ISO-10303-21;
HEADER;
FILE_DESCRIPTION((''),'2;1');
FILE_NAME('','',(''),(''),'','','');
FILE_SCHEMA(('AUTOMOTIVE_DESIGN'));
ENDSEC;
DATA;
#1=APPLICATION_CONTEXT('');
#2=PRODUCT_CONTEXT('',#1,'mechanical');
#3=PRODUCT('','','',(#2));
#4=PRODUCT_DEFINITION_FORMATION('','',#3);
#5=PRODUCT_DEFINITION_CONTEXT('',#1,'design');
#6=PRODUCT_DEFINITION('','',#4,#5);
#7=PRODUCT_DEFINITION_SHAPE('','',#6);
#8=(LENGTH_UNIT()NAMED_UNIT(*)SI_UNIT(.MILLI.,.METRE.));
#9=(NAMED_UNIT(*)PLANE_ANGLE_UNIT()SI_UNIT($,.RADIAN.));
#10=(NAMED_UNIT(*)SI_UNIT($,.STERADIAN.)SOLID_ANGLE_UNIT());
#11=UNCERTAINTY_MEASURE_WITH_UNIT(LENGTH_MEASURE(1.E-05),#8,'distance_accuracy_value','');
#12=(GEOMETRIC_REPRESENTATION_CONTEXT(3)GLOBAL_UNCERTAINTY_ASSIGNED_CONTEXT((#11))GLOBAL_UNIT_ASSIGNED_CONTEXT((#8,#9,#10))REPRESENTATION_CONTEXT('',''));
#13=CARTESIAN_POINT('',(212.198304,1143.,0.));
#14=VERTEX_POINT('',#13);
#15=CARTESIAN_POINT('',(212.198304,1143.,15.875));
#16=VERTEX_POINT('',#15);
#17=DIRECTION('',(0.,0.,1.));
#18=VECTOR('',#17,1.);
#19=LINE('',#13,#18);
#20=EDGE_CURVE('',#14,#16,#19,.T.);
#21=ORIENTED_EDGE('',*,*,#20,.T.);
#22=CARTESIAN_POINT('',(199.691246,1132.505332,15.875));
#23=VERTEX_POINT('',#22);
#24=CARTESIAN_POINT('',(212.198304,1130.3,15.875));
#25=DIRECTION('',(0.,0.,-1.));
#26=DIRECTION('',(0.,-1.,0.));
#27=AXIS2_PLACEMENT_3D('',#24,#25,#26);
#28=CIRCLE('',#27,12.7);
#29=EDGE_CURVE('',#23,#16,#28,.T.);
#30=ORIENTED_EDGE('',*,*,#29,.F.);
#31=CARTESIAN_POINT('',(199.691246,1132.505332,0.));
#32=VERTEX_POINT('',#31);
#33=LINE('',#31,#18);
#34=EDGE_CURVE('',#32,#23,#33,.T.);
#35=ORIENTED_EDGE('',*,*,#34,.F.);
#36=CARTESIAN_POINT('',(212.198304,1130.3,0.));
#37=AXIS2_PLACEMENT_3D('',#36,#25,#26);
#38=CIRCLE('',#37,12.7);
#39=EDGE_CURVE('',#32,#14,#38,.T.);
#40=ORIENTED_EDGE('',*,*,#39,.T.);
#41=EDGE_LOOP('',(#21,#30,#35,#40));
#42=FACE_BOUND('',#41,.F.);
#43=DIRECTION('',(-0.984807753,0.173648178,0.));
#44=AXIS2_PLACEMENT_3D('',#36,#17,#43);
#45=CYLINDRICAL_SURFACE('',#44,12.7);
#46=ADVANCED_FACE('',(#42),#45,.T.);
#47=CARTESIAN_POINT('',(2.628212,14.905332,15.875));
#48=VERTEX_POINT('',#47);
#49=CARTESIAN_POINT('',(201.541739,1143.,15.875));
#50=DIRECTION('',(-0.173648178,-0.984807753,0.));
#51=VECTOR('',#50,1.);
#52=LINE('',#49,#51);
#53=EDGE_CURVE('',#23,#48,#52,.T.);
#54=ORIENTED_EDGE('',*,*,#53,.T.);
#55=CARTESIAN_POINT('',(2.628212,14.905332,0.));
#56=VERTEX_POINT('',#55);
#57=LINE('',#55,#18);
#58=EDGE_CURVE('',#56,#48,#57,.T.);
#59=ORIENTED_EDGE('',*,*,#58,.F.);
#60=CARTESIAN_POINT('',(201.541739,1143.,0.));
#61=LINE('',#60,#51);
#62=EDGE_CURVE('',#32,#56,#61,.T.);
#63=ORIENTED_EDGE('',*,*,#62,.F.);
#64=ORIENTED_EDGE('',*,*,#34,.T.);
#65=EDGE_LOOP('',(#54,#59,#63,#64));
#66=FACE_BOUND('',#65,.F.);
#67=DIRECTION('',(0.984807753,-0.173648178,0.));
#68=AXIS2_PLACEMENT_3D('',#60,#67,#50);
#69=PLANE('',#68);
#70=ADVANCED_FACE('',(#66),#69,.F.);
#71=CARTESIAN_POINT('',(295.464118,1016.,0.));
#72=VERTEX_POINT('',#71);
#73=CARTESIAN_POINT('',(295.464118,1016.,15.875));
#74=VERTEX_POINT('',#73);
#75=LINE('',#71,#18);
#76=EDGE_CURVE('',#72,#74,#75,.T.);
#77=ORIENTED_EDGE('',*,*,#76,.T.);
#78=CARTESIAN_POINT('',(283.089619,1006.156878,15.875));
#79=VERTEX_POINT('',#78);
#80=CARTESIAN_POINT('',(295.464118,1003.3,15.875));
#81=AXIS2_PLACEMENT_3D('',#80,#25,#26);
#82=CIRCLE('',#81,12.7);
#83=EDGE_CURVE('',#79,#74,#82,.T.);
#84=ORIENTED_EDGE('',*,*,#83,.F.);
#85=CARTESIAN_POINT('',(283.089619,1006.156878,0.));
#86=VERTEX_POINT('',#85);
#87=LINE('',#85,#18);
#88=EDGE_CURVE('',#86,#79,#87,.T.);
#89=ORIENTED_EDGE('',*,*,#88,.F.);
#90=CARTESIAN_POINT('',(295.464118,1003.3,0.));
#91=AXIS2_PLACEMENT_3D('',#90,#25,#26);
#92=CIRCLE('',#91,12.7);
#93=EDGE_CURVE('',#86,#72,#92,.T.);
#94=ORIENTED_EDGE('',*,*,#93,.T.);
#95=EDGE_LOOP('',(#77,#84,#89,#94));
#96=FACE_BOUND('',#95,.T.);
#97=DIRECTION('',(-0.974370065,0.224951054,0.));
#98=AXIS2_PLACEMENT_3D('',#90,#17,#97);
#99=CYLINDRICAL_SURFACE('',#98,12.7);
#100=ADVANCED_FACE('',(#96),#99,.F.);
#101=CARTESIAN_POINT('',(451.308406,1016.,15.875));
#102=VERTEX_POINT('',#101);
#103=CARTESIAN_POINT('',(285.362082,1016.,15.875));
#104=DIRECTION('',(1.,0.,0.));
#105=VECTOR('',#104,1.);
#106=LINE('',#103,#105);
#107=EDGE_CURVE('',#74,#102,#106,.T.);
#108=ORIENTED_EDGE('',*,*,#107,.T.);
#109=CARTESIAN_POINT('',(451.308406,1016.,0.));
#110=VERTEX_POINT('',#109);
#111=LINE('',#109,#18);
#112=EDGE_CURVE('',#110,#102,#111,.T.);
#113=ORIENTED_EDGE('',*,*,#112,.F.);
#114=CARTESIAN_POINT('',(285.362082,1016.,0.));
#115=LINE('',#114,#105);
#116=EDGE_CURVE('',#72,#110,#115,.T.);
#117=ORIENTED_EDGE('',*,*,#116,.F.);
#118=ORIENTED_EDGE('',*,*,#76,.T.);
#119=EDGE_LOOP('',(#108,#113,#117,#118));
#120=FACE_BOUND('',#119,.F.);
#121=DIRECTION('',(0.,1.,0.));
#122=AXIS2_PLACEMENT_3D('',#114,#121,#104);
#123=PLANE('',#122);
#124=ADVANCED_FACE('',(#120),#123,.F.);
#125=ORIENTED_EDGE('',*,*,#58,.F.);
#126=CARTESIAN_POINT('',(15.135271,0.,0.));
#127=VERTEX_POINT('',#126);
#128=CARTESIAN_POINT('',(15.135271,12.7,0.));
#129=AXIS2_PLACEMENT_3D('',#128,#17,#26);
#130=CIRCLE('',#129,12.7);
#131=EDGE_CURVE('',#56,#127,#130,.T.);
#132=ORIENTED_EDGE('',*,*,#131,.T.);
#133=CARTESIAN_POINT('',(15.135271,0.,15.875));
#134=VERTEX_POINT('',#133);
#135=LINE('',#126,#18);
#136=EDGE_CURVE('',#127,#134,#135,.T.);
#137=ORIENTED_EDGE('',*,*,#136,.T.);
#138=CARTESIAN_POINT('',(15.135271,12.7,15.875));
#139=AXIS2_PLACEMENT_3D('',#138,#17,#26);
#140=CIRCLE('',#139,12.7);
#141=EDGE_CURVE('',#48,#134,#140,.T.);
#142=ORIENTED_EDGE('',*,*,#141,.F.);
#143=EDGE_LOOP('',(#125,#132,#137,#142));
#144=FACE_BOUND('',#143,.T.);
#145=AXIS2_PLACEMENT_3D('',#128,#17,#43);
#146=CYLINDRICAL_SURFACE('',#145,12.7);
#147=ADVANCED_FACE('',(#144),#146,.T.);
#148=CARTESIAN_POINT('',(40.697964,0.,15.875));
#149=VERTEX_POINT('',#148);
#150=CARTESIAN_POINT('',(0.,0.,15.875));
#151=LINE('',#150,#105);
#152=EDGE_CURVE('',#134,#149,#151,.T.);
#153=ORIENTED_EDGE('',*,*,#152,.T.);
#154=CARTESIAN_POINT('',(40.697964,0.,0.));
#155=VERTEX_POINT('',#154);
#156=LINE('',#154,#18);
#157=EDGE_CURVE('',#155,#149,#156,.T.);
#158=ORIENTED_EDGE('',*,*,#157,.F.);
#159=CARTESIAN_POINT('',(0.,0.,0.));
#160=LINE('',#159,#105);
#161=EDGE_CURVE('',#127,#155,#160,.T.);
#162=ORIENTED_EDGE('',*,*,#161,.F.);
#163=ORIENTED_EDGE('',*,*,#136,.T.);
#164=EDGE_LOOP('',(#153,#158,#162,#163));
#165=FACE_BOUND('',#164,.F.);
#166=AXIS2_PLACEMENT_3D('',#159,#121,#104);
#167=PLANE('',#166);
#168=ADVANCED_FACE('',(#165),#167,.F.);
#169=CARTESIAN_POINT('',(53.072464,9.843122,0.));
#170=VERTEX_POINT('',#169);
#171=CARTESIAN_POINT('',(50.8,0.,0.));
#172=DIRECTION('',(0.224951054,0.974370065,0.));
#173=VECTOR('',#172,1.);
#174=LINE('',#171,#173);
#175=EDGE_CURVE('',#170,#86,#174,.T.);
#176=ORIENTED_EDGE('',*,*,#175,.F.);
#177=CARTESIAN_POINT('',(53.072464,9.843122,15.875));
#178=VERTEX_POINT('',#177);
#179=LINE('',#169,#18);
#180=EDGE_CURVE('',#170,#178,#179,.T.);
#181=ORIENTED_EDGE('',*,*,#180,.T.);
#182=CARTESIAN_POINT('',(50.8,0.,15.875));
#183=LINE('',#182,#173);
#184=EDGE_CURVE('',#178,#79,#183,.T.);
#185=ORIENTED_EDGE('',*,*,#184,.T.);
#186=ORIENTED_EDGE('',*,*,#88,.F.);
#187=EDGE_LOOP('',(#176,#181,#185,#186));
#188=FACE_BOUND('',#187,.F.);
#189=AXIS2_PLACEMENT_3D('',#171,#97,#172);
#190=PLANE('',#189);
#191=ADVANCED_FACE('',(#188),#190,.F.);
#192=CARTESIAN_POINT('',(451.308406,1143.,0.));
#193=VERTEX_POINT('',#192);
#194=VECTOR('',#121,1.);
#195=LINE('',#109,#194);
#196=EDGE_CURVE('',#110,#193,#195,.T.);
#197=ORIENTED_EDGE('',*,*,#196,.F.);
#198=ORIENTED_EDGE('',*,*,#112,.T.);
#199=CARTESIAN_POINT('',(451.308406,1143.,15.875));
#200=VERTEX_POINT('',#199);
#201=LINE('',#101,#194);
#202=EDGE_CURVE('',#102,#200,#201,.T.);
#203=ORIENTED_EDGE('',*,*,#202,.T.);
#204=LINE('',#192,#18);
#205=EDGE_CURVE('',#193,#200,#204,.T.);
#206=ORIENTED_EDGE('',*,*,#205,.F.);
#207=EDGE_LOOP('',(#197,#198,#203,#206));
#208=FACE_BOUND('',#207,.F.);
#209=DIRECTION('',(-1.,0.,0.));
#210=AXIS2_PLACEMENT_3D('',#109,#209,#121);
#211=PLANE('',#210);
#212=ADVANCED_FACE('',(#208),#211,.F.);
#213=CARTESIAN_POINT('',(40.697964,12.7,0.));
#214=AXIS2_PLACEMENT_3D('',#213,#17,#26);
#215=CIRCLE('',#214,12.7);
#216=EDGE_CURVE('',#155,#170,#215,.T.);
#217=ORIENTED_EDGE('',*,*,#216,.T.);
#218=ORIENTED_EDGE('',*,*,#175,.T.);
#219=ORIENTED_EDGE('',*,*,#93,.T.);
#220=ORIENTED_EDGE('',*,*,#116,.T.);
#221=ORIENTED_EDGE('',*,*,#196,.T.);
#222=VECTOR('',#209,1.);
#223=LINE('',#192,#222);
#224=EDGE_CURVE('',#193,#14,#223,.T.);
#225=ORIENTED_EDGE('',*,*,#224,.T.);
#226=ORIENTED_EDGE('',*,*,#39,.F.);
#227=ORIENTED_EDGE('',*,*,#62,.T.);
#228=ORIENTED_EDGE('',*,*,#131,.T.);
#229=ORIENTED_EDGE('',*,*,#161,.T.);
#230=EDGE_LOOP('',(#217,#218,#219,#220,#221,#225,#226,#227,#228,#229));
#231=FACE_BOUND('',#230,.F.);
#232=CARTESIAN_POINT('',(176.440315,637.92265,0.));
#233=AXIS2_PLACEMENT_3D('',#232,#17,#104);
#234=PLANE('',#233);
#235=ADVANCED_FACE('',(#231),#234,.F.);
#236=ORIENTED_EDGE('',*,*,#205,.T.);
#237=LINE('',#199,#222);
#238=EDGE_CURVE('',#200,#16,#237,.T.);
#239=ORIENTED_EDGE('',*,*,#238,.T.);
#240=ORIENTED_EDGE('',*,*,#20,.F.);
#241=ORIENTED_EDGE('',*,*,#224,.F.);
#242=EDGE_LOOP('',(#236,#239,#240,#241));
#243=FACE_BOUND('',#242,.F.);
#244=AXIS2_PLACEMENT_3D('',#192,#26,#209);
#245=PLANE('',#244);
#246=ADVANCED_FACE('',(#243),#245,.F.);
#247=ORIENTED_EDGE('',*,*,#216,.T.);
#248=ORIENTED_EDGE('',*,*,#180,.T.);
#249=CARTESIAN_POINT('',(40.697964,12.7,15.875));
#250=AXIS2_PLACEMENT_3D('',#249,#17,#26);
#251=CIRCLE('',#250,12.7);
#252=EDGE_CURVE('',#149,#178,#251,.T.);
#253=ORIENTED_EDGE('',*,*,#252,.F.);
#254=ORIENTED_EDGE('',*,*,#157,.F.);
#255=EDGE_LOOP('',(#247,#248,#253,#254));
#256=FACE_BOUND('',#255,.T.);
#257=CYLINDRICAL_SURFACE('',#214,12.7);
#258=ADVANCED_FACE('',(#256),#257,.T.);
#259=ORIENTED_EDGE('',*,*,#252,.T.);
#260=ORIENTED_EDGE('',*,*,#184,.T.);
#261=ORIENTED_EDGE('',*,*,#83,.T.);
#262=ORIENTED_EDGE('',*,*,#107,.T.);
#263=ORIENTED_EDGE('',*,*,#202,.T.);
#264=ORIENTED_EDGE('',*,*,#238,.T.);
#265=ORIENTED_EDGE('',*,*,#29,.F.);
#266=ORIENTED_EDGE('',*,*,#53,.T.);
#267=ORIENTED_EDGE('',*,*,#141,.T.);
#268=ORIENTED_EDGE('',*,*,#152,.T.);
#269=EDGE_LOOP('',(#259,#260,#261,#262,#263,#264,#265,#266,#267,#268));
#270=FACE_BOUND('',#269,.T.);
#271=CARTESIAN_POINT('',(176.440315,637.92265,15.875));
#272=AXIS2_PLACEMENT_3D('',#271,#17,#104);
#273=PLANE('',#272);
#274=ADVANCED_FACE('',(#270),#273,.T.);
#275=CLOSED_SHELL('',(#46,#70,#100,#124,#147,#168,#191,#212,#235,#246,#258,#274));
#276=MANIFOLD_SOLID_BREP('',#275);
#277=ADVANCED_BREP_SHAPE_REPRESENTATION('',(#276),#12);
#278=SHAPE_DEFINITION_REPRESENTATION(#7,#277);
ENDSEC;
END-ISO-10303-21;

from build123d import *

# Parameters (mm, degrees)
F1_DEPTH = 15.875
F2_R     = 12.7


# Not quite as in the source:
# - a length typed as a fraction of an inch, garbled in the dataset ("3 / 203.2 mm" for 3/8 in), is restored


with BuildPart() as f1:
    # F0 (on Top) → F1 (new body)
    with BuildSketch(Plane.XY):
        Polygon((201.5417389498, 1143), (0, 0), (50.8, 0), (285.3620821836, 1016), (451.3084056164, 1016), (451.3084056164, 1143), align=None)
    extrude(amount=F1_DEPTH)

    # F2
    f2_edges = [f1.edges().sort_by_distance(p)[0] for p in [
        (201.541739, 1143, 7.9375),
        (285.362082, 1016, 7.9375),
        (0, 0, 7.9375),
        (50.8, 0, 7.9375),
    ]]
    fillet(f2_edges, radius=F2_R)


solid = f1.part
